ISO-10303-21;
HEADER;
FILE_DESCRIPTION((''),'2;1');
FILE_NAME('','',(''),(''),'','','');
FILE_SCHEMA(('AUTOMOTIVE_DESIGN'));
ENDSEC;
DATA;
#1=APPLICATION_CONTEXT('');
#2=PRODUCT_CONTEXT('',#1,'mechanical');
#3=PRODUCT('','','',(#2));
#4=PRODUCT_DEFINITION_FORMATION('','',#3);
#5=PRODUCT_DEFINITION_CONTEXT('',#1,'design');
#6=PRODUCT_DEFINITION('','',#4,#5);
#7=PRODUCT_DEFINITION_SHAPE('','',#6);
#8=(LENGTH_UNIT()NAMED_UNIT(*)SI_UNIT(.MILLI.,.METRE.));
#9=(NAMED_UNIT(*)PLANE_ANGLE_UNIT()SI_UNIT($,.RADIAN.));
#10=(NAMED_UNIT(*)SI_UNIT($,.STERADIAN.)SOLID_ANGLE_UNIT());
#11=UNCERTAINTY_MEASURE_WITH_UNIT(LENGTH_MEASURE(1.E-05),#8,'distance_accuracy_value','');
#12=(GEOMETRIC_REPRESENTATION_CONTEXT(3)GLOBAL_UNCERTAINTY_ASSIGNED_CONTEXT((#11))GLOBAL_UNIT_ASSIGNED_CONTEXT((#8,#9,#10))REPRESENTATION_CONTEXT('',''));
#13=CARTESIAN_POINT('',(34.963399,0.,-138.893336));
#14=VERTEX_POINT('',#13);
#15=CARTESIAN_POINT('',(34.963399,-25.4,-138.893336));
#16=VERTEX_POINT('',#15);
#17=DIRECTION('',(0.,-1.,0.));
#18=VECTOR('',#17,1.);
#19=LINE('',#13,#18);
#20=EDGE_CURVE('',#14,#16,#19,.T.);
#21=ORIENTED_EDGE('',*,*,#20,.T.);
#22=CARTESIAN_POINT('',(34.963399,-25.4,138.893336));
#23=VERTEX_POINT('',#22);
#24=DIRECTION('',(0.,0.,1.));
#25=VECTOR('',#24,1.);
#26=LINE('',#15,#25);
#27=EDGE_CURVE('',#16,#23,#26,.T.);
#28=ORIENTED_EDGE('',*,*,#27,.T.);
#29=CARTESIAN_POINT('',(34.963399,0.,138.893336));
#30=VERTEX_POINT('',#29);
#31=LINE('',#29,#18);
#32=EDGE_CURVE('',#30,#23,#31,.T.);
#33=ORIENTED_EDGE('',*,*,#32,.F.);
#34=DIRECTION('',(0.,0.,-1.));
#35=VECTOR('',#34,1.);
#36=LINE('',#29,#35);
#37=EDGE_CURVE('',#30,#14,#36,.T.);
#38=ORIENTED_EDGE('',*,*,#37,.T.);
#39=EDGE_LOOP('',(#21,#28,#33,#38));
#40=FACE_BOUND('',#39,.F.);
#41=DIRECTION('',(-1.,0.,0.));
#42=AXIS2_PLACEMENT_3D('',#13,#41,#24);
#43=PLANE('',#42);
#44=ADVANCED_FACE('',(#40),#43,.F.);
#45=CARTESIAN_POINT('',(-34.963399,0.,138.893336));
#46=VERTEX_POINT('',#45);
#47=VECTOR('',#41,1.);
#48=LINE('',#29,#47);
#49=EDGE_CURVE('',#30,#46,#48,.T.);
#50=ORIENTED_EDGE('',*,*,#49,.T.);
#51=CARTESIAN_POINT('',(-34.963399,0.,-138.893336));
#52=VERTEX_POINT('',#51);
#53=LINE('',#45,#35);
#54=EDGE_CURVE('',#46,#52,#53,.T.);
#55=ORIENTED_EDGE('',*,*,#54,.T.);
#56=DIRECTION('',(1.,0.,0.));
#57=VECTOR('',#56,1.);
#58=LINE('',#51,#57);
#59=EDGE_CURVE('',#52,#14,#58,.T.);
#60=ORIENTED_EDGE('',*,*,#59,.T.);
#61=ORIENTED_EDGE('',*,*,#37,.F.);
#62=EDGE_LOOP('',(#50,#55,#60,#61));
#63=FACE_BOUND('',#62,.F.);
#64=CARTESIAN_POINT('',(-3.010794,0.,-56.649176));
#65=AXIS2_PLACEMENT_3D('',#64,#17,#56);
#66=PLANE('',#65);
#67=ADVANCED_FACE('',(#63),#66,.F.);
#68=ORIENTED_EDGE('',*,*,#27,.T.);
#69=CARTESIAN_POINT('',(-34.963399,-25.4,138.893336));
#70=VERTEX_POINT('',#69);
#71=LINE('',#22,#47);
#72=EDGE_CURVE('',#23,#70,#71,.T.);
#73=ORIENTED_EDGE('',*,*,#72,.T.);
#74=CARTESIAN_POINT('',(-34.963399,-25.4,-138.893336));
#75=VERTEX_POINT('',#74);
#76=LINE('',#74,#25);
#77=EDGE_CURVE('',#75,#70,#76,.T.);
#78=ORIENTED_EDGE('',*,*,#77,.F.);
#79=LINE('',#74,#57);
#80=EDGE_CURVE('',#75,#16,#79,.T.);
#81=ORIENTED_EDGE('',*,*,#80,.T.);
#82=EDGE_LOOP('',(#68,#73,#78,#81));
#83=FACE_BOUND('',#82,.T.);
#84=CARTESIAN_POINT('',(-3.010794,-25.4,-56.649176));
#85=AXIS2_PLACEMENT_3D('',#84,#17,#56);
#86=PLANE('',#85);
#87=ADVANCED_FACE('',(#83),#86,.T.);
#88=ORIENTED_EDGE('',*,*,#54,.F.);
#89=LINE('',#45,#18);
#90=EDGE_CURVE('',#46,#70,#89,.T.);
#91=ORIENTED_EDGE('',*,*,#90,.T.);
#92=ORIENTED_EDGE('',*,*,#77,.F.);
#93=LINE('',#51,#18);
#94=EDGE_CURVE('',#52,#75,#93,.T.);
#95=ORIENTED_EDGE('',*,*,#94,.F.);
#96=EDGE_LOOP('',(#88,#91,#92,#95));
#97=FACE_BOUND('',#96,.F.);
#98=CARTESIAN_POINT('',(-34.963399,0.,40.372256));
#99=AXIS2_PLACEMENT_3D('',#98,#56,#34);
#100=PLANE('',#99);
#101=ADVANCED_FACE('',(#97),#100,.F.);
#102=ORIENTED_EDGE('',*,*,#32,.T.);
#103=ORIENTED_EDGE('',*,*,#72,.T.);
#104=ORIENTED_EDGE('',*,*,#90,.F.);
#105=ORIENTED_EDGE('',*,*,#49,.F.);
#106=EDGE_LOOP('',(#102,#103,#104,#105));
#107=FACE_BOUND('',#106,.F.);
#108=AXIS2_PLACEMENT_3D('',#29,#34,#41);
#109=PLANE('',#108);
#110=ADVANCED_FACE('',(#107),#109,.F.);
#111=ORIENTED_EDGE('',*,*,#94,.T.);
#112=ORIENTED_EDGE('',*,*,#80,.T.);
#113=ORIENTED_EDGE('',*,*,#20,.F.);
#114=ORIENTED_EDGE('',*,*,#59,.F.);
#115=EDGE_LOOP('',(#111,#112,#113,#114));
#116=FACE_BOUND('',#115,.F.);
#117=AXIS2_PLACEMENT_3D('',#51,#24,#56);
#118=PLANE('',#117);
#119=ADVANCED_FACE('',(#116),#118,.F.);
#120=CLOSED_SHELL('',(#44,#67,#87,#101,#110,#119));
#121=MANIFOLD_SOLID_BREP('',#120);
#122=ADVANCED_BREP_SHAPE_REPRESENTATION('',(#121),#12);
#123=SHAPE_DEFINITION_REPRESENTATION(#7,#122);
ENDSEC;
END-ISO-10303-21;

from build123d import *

# Parameters (mm, degrees)
F1_DEPTH = 25.4
F2_DEPTH = 25.4


# Not quite as in the source:
# - the program builds the solid bodies; features that only make, move or delete a surface that nothing else refers to are left out


with BuildPart() as f1:
    # F0 (on Front) → F1 (new body)
    with BuildSketch(Plane.XZ):
        Polygon((34.9633991718, 138.8933360577), (-34.9633991718, 138.8933360577), (-34.9633991718, 40.3722558473), (34.9633991718, 0), align=None)
    extrude(amount=F1_DEPTH)

    # F0 (on Front) → F2 (join)
    with BuildSketch(Plane.XZ):
        Polygon((34.9633991718, 0), (-34.9633991718, 40.3722558473), (-34.9633991718, -138.8933360577), (34.9633991718, -138.8933360577), align=None)
    extrude(amount=F2_DEPTH)


solid = f1.part
